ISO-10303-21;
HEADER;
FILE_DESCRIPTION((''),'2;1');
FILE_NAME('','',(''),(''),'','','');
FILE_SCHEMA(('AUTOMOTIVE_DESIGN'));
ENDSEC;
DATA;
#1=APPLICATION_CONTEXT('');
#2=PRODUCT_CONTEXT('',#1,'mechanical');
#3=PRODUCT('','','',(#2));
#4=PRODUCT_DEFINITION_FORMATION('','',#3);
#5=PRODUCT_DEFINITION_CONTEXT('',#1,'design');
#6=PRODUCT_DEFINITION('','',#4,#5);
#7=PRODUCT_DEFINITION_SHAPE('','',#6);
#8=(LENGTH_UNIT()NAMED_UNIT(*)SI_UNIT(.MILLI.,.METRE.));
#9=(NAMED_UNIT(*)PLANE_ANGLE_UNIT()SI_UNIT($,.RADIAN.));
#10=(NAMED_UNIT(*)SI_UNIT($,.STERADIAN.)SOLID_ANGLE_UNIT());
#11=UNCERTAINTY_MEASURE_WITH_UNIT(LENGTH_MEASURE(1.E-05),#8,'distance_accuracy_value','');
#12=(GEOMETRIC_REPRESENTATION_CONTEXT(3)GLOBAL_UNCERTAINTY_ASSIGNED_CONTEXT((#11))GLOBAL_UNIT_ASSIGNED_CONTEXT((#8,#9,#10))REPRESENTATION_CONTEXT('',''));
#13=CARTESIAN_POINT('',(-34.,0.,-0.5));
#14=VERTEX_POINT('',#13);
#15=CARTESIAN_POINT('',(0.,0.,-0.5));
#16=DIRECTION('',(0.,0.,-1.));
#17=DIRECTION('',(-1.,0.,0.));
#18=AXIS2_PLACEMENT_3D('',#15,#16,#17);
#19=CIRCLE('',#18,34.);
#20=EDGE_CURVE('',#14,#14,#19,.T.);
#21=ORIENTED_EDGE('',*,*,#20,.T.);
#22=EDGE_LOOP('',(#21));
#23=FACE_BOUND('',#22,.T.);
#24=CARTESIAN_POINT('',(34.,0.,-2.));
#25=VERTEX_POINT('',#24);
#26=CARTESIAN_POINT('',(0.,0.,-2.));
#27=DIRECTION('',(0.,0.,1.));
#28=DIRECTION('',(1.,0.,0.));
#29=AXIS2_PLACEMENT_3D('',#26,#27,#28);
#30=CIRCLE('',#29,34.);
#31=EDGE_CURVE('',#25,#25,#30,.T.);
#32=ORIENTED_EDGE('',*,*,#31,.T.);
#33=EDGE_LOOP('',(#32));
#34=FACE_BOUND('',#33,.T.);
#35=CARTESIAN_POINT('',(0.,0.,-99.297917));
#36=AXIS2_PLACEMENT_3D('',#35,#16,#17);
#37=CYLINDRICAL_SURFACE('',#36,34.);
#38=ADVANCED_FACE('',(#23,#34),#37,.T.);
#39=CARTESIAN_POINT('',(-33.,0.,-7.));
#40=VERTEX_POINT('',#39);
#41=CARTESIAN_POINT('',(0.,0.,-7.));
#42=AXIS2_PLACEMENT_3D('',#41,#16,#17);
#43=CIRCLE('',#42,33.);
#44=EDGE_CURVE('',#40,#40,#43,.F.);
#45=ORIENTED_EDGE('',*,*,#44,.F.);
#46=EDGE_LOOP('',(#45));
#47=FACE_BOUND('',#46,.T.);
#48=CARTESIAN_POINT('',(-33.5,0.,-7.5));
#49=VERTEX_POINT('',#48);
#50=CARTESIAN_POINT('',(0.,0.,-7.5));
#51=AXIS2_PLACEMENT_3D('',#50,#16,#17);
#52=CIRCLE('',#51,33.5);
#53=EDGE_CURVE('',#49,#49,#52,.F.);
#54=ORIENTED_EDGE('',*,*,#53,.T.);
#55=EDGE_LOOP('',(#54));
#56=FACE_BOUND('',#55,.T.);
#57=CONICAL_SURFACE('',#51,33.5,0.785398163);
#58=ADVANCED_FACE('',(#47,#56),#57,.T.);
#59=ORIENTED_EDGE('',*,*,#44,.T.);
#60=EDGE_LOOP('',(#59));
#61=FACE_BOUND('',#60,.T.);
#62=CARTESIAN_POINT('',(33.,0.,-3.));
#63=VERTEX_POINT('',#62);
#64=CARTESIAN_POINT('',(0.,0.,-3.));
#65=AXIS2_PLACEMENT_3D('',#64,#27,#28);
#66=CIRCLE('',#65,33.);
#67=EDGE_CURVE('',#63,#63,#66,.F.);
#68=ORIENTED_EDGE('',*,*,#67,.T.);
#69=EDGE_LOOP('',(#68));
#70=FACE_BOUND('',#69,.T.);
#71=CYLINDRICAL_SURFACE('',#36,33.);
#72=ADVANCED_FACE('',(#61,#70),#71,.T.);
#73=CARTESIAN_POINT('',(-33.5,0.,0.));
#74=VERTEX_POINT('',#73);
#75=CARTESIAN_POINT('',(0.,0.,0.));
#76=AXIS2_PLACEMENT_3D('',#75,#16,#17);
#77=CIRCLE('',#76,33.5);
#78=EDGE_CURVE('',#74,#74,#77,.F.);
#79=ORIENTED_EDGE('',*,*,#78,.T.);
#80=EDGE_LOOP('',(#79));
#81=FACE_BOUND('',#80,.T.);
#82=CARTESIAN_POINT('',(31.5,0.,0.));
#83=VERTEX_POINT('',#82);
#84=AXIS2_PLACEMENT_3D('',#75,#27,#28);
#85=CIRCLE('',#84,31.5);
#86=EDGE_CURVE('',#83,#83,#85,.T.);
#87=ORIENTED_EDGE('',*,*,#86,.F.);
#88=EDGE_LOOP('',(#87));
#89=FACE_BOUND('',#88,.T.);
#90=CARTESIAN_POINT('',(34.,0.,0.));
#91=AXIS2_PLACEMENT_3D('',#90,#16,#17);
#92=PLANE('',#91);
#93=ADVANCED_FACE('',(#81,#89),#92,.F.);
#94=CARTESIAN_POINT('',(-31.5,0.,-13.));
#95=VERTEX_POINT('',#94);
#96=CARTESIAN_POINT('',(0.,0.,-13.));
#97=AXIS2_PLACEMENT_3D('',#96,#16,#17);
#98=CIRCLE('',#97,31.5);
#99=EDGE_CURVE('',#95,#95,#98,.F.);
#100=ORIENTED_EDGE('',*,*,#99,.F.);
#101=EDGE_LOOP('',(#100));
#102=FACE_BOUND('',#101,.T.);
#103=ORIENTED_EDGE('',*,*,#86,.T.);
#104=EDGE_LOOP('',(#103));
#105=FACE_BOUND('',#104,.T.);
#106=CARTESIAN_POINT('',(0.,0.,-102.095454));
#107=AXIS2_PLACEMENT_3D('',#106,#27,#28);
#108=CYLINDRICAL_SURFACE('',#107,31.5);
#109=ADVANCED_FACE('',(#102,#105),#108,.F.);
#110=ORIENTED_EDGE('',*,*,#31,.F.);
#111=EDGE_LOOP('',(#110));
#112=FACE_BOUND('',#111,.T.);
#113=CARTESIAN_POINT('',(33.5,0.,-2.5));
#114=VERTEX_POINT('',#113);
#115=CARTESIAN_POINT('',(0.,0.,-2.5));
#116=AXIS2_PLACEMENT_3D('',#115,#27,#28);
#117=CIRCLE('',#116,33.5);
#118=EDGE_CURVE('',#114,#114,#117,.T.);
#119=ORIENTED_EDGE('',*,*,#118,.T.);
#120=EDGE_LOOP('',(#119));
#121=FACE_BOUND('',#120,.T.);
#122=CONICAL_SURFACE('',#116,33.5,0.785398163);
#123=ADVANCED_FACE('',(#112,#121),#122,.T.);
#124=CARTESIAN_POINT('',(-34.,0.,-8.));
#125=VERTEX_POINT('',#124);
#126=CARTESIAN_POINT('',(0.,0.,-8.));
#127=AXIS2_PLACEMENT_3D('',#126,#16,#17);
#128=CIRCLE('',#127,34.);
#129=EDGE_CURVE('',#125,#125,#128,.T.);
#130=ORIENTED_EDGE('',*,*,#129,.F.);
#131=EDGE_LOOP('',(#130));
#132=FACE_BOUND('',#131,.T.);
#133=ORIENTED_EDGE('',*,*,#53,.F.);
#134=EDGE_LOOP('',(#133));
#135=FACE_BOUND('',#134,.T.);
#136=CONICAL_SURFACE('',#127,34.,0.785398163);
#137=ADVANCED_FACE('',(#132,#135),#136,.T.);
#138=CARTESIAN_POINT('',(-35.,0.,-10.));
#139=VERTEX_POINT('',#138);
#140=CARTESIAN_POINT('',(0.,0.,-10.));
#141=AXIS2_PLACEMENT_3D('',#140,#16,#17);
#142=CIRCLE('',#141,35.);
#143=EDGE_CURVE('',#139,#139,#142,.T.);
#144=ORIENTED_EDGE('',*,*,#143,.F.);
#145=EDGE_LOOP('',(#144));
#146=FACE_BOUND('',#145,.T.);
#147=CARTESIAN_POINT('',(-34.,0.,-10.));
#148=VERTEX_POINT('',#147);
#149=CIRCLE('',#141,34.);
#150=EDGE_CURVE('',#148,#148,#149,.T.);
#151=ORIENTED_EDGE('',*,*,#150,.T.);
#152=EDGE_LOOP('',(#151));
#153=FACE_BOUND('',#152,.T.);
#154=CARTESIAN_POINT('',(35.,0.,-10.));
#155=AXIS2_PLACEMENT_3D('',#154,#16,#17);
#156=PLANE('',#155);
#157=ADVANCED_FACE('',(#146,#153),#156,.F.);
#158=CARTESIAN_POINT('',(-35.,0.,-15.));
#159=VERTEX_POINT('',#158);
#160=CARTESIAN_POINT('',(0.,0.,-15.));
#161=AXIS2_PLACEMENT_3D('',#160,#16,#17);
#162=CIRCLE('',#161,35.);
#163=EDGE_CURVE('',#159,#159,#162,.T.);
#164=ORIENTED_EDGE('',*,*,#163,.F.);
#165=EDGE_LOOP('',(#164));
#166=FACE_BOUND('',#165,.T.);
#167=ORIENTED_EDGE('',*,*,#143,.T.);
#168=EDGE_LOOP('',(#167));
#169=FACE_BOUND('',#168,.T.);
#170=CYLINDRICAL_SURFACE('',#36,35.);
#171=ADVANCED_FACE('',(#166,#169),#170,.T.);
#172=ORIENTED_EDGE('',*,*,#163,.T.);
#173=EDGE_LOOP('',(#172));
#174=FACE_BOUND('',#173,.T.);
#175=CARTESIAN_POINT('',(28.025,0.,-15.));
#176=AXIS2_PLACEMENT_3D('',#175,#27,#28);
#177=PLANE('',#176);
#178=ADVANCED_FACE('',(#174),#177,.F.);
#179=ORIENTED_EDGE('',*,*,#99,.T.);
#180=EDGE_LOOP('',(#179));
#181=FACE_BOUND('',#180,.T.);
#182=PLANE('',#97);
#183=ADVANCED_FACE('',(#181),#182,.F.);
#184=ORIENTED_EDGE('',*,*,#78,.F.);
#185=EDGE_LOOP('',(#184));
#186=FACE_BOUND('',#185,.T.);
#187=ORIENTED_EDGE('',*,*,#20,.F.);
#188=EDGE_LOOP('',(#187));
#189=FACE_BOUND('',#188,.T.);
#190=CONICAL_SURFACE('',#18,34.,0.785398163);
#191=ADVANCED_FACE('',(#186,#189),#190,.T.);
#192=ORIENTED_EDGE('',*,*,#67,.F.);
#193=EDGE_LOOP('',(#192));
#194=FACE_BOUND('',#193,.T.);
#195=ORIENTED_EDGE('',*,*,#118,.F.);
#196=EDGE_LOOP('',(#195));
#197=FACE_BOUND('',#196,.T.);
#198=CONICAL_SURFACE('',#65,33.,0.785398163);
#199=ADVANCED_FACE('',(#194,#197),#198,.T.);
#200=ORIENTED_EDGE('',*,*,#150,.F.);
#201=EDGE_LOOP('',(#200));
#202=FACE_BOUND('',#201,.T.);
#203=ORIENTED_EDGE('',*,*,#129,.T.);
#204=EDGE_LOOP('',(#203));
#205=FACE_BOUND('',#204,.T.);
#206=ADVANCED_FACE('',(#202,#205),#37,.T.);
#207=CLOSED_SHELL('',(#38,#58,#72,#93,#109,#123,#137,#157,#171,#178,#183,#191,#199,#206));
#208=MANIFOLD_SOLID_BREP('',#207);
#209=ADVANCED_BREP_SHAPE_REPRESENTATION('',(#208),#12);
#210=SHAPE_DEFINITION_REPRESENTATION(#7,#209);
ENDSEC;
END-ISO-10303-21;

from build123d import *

# Parameters (mm, degrees)
CHAMFER1_SIZE           = 0.5
CHAMFER2_SIZE           = 0.5
BOSS_EXTRUDE1_START     = -2
SKETCH3_R               = 28.025
BOSS_EXTRUDE1_DEPTH     = 2
CUT_EXTRUDE1_DEPTH      = 54.38539126
CUT_EXTRUDE1_DEPTH_BACK = 54.38539126
SKETCH4_W               = 71.155629785
SKETCH4_H               = 10.339888571
SKETCH5_R               = 31.5
CUT_EXTRUDE2_DEPTH      = 13


with BuildPart() as part:
    # Sketch1 → Revolve1 (revolve)
    with BuildSketch(Plane(origin=(0, 0, 0), x_dir=(1, 0, 0), z_dir=(0, 1, 0)), mode=Mode.PRIVATE) as revolve1_sk:
        Polygon((25.025, 0), (25.025, 20), (28.025, 20), (28.025, 15), (35, 15), (35, 10), (34, 10), (34, 7.5), (33, 7.5), (33, 2.5), (34, 2.5), (34, 0), align=None)
    revolve(revolve1_sk.sketch.rotate(Axis((0, 0, -99.297916667), (0, 0, 1)), 180), axis=Axis((0, 0, -99.297916667), (0, 0, 1)))

    # Chamfer1
    chamfer1_edges = [part.edges().sort_by_distance(p)[0] for p in [
        (28.025, 0, -20),
        (25.025, 0, -20),
    ]]
    chamfer(chamfer1_edges, length=CHAMFER1_SIZE)

    # Chamfer2
    chamfer2_edges = [part.edges().sort_by_distance(p)[0] for p in [
        (34, 0, -7.5),
        (34, 0, 0),
        (34, 0, -2.5),
        (33, 0, -2.5),
        (33, 0, -7.5),
    ]]
    chamfer(chamfer2_edges, length=CHAMFER2_SIZE - 0.0001)  # a hair under: the kernel refuses the full size

    # Sketch3 → Boss-Extrude1 (add)
    with BuildSketch(Plane(origin=(0, 0, -15), x_dir=(-1, 0, 0), z_dir=(0, 0, -1)).offset(BOSS_EXTRUDE1_START)):
        Circle(SKETCH3_R)
    extrude(amount=BOSS_EXTRUDE1_DEPTH)

    # Sketch4 → Cut-Extrude1 (cut, two sides: drawn at the far end of the back side and taken through both)
    with BuildSketch(Plane(origin=(0, 0, 0), x_dir=(1, 0, 0), z_dir=(0, 1, 0)).offset(-CUT_EXTRUDE1_DEPTH_BACK)):
        with Locations((0.577814893, 20.169944286)):
            Rectangle(SKETCH4_W, SKETCH4_H)
    extrude(amount=CUT_EXTRUDE1_DEPTH + CUT_EXTRUDE1_DEPTH_BACK, mode=Mode.SUBTRACT)

    # Sketch5 → Cut-Extrude2 (cut)
    with BuildSketch(Plane.XY):
        Circle(SKETCH5_R)
    extrude(amount=-CUT_EXTRUDE2_DEPTH, mode=Mode.SUBTRACT)


solid = part.part
